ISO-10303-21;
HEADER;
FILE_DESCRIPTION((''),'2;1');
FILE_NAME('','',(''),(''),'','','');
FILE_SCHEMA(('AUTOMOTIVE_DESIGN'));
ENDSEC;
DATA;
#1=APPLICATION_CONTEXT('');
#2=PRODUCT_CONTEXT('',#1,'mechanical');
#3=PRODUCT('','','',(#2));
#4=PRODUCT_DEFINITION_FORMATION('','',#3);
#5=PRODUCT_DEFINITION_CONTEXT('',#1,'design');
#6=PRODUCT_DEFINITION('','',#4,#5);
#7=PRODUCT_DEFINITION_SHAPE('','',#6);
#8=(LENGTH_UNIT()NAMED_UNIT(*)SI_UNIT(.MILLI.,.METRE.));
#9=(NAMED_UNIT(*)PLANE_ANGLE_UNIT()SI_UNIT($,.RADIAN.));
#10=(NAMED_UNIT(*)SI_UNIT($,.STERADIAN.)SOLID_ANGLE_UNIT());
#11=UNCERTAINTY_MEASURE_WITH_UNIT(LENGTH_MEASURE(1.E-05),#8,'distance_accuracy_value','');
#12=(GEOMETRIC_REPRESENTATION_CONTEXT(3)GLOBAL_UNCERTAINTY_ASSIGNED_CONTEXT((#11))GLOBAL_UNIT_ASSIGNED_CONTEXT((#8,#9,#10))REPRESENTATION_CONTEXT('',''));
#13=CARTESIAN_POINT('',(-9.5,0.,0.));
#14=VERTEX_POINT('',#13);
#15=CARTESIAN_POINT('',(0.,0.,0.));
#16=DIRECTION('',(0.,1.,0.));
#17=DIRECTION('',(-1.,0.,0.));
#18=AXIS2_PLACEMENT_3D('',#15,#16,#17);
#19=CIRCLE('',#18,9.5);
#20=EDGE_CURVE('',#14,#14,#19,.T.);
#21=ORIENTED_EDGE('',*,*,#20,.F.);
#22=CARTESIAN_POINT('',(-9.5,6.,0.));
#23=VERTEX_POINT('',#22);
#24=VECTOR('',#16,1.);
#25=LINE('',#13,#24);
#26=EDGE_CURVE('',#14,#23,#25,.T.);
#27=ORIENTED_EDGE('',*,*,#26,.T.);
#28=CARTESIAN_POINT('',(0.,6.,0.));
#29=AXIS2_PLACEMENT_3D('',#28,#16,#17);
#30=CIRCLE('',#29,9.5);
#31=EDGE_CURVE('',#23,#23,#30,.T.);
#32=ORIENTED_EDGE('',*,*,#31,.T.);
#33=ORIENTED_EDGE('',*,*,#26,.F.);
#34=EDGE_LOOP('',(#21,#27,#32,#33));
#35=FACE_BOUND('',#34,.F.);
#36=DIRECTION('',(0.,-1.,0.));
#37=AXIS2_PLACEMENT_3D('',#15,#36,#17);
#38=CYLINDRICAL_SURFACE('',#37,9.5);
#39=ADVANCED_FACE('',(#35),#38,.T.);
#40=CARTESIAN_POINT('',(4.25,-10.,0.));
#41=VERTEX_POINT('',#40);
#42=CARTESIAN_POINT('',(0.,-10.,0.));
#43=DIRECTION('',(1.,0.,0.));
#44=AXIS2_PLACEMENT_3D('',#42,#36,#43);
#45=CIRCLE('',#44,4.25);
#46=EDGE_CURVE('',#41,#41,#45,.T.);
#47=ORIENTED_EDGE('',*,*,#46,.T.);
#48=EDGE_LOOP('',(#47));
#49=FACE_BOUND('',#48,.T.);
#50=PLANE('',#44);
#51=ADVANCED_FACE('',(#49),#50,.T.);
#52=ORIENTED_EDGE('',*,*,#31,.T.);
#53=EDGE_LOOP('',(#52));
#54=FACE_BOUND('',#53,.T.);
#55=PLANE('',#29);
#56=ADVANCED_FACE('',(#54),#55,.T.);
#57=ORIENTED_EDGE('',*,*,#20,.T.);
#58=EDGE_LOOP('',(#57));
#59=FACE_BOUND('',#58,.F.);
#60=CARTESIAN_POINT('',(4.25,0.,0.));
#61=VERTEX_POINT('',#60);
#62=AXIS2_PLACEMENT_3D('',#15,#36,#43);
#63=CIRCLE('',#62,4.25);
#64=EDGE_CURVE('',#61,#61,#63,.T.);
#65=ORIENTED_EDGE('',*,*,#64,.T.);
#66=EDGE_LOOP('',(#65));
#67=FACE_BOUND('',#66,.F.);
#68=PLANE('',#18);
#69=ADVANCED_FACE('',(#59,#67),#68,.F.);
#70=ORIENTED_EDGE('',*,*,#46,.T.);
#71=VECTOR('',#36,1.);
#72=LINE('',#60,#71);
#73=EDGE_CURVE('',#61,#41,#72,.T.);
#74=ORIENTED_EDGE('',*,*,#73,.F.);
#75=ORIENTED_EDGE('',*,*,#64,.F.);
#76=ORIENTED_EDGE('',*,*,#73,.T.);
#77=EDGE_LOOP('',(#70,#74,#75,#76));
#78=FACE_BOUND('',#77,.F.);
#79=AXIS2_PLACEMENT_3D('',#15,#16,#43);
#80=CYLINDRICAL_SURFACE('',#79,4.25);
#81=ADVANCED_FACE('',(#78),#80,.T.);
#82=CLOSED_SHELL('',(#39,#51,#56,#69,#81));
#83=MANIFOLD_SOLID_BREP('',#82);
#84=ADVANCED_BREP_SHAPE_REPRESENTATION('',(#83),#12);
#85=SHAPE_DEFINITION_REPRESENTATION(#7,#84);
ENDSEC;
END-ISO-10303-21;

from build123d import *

# Parameters (mm, degrees)
F0_R     = 4.25
F1_DEPTH = 10
F2_R     = 9.5
F2_R_2   = 4.25
F3_DEPTH = 6


# Not quite as in the source:
# - the program builds the solid bodies; features that only make, move or delete a surface that nothing else refers to are left out


with BuildPart() as f1:
    # F0 (on Front) → F1 (new body)
    with BuildSketch(Plane.XZ):
        Circle(F0_R)
    extrude(amount=F1_DEPTH)

    # F2 (on face) → F3 (join)
    with BuildSketch(Plane(origin=(0, 0, 0), x_dir=(-1, 0, 0), z_dir=(0, 1, 0))):
        Circle(F2_R)
        Circle(F2_R_2, mode=Mode.SUBTRACT)
        Circle(F2_R_2)
    extrude(amount=F3_DEPTH)


solid = f1.part
